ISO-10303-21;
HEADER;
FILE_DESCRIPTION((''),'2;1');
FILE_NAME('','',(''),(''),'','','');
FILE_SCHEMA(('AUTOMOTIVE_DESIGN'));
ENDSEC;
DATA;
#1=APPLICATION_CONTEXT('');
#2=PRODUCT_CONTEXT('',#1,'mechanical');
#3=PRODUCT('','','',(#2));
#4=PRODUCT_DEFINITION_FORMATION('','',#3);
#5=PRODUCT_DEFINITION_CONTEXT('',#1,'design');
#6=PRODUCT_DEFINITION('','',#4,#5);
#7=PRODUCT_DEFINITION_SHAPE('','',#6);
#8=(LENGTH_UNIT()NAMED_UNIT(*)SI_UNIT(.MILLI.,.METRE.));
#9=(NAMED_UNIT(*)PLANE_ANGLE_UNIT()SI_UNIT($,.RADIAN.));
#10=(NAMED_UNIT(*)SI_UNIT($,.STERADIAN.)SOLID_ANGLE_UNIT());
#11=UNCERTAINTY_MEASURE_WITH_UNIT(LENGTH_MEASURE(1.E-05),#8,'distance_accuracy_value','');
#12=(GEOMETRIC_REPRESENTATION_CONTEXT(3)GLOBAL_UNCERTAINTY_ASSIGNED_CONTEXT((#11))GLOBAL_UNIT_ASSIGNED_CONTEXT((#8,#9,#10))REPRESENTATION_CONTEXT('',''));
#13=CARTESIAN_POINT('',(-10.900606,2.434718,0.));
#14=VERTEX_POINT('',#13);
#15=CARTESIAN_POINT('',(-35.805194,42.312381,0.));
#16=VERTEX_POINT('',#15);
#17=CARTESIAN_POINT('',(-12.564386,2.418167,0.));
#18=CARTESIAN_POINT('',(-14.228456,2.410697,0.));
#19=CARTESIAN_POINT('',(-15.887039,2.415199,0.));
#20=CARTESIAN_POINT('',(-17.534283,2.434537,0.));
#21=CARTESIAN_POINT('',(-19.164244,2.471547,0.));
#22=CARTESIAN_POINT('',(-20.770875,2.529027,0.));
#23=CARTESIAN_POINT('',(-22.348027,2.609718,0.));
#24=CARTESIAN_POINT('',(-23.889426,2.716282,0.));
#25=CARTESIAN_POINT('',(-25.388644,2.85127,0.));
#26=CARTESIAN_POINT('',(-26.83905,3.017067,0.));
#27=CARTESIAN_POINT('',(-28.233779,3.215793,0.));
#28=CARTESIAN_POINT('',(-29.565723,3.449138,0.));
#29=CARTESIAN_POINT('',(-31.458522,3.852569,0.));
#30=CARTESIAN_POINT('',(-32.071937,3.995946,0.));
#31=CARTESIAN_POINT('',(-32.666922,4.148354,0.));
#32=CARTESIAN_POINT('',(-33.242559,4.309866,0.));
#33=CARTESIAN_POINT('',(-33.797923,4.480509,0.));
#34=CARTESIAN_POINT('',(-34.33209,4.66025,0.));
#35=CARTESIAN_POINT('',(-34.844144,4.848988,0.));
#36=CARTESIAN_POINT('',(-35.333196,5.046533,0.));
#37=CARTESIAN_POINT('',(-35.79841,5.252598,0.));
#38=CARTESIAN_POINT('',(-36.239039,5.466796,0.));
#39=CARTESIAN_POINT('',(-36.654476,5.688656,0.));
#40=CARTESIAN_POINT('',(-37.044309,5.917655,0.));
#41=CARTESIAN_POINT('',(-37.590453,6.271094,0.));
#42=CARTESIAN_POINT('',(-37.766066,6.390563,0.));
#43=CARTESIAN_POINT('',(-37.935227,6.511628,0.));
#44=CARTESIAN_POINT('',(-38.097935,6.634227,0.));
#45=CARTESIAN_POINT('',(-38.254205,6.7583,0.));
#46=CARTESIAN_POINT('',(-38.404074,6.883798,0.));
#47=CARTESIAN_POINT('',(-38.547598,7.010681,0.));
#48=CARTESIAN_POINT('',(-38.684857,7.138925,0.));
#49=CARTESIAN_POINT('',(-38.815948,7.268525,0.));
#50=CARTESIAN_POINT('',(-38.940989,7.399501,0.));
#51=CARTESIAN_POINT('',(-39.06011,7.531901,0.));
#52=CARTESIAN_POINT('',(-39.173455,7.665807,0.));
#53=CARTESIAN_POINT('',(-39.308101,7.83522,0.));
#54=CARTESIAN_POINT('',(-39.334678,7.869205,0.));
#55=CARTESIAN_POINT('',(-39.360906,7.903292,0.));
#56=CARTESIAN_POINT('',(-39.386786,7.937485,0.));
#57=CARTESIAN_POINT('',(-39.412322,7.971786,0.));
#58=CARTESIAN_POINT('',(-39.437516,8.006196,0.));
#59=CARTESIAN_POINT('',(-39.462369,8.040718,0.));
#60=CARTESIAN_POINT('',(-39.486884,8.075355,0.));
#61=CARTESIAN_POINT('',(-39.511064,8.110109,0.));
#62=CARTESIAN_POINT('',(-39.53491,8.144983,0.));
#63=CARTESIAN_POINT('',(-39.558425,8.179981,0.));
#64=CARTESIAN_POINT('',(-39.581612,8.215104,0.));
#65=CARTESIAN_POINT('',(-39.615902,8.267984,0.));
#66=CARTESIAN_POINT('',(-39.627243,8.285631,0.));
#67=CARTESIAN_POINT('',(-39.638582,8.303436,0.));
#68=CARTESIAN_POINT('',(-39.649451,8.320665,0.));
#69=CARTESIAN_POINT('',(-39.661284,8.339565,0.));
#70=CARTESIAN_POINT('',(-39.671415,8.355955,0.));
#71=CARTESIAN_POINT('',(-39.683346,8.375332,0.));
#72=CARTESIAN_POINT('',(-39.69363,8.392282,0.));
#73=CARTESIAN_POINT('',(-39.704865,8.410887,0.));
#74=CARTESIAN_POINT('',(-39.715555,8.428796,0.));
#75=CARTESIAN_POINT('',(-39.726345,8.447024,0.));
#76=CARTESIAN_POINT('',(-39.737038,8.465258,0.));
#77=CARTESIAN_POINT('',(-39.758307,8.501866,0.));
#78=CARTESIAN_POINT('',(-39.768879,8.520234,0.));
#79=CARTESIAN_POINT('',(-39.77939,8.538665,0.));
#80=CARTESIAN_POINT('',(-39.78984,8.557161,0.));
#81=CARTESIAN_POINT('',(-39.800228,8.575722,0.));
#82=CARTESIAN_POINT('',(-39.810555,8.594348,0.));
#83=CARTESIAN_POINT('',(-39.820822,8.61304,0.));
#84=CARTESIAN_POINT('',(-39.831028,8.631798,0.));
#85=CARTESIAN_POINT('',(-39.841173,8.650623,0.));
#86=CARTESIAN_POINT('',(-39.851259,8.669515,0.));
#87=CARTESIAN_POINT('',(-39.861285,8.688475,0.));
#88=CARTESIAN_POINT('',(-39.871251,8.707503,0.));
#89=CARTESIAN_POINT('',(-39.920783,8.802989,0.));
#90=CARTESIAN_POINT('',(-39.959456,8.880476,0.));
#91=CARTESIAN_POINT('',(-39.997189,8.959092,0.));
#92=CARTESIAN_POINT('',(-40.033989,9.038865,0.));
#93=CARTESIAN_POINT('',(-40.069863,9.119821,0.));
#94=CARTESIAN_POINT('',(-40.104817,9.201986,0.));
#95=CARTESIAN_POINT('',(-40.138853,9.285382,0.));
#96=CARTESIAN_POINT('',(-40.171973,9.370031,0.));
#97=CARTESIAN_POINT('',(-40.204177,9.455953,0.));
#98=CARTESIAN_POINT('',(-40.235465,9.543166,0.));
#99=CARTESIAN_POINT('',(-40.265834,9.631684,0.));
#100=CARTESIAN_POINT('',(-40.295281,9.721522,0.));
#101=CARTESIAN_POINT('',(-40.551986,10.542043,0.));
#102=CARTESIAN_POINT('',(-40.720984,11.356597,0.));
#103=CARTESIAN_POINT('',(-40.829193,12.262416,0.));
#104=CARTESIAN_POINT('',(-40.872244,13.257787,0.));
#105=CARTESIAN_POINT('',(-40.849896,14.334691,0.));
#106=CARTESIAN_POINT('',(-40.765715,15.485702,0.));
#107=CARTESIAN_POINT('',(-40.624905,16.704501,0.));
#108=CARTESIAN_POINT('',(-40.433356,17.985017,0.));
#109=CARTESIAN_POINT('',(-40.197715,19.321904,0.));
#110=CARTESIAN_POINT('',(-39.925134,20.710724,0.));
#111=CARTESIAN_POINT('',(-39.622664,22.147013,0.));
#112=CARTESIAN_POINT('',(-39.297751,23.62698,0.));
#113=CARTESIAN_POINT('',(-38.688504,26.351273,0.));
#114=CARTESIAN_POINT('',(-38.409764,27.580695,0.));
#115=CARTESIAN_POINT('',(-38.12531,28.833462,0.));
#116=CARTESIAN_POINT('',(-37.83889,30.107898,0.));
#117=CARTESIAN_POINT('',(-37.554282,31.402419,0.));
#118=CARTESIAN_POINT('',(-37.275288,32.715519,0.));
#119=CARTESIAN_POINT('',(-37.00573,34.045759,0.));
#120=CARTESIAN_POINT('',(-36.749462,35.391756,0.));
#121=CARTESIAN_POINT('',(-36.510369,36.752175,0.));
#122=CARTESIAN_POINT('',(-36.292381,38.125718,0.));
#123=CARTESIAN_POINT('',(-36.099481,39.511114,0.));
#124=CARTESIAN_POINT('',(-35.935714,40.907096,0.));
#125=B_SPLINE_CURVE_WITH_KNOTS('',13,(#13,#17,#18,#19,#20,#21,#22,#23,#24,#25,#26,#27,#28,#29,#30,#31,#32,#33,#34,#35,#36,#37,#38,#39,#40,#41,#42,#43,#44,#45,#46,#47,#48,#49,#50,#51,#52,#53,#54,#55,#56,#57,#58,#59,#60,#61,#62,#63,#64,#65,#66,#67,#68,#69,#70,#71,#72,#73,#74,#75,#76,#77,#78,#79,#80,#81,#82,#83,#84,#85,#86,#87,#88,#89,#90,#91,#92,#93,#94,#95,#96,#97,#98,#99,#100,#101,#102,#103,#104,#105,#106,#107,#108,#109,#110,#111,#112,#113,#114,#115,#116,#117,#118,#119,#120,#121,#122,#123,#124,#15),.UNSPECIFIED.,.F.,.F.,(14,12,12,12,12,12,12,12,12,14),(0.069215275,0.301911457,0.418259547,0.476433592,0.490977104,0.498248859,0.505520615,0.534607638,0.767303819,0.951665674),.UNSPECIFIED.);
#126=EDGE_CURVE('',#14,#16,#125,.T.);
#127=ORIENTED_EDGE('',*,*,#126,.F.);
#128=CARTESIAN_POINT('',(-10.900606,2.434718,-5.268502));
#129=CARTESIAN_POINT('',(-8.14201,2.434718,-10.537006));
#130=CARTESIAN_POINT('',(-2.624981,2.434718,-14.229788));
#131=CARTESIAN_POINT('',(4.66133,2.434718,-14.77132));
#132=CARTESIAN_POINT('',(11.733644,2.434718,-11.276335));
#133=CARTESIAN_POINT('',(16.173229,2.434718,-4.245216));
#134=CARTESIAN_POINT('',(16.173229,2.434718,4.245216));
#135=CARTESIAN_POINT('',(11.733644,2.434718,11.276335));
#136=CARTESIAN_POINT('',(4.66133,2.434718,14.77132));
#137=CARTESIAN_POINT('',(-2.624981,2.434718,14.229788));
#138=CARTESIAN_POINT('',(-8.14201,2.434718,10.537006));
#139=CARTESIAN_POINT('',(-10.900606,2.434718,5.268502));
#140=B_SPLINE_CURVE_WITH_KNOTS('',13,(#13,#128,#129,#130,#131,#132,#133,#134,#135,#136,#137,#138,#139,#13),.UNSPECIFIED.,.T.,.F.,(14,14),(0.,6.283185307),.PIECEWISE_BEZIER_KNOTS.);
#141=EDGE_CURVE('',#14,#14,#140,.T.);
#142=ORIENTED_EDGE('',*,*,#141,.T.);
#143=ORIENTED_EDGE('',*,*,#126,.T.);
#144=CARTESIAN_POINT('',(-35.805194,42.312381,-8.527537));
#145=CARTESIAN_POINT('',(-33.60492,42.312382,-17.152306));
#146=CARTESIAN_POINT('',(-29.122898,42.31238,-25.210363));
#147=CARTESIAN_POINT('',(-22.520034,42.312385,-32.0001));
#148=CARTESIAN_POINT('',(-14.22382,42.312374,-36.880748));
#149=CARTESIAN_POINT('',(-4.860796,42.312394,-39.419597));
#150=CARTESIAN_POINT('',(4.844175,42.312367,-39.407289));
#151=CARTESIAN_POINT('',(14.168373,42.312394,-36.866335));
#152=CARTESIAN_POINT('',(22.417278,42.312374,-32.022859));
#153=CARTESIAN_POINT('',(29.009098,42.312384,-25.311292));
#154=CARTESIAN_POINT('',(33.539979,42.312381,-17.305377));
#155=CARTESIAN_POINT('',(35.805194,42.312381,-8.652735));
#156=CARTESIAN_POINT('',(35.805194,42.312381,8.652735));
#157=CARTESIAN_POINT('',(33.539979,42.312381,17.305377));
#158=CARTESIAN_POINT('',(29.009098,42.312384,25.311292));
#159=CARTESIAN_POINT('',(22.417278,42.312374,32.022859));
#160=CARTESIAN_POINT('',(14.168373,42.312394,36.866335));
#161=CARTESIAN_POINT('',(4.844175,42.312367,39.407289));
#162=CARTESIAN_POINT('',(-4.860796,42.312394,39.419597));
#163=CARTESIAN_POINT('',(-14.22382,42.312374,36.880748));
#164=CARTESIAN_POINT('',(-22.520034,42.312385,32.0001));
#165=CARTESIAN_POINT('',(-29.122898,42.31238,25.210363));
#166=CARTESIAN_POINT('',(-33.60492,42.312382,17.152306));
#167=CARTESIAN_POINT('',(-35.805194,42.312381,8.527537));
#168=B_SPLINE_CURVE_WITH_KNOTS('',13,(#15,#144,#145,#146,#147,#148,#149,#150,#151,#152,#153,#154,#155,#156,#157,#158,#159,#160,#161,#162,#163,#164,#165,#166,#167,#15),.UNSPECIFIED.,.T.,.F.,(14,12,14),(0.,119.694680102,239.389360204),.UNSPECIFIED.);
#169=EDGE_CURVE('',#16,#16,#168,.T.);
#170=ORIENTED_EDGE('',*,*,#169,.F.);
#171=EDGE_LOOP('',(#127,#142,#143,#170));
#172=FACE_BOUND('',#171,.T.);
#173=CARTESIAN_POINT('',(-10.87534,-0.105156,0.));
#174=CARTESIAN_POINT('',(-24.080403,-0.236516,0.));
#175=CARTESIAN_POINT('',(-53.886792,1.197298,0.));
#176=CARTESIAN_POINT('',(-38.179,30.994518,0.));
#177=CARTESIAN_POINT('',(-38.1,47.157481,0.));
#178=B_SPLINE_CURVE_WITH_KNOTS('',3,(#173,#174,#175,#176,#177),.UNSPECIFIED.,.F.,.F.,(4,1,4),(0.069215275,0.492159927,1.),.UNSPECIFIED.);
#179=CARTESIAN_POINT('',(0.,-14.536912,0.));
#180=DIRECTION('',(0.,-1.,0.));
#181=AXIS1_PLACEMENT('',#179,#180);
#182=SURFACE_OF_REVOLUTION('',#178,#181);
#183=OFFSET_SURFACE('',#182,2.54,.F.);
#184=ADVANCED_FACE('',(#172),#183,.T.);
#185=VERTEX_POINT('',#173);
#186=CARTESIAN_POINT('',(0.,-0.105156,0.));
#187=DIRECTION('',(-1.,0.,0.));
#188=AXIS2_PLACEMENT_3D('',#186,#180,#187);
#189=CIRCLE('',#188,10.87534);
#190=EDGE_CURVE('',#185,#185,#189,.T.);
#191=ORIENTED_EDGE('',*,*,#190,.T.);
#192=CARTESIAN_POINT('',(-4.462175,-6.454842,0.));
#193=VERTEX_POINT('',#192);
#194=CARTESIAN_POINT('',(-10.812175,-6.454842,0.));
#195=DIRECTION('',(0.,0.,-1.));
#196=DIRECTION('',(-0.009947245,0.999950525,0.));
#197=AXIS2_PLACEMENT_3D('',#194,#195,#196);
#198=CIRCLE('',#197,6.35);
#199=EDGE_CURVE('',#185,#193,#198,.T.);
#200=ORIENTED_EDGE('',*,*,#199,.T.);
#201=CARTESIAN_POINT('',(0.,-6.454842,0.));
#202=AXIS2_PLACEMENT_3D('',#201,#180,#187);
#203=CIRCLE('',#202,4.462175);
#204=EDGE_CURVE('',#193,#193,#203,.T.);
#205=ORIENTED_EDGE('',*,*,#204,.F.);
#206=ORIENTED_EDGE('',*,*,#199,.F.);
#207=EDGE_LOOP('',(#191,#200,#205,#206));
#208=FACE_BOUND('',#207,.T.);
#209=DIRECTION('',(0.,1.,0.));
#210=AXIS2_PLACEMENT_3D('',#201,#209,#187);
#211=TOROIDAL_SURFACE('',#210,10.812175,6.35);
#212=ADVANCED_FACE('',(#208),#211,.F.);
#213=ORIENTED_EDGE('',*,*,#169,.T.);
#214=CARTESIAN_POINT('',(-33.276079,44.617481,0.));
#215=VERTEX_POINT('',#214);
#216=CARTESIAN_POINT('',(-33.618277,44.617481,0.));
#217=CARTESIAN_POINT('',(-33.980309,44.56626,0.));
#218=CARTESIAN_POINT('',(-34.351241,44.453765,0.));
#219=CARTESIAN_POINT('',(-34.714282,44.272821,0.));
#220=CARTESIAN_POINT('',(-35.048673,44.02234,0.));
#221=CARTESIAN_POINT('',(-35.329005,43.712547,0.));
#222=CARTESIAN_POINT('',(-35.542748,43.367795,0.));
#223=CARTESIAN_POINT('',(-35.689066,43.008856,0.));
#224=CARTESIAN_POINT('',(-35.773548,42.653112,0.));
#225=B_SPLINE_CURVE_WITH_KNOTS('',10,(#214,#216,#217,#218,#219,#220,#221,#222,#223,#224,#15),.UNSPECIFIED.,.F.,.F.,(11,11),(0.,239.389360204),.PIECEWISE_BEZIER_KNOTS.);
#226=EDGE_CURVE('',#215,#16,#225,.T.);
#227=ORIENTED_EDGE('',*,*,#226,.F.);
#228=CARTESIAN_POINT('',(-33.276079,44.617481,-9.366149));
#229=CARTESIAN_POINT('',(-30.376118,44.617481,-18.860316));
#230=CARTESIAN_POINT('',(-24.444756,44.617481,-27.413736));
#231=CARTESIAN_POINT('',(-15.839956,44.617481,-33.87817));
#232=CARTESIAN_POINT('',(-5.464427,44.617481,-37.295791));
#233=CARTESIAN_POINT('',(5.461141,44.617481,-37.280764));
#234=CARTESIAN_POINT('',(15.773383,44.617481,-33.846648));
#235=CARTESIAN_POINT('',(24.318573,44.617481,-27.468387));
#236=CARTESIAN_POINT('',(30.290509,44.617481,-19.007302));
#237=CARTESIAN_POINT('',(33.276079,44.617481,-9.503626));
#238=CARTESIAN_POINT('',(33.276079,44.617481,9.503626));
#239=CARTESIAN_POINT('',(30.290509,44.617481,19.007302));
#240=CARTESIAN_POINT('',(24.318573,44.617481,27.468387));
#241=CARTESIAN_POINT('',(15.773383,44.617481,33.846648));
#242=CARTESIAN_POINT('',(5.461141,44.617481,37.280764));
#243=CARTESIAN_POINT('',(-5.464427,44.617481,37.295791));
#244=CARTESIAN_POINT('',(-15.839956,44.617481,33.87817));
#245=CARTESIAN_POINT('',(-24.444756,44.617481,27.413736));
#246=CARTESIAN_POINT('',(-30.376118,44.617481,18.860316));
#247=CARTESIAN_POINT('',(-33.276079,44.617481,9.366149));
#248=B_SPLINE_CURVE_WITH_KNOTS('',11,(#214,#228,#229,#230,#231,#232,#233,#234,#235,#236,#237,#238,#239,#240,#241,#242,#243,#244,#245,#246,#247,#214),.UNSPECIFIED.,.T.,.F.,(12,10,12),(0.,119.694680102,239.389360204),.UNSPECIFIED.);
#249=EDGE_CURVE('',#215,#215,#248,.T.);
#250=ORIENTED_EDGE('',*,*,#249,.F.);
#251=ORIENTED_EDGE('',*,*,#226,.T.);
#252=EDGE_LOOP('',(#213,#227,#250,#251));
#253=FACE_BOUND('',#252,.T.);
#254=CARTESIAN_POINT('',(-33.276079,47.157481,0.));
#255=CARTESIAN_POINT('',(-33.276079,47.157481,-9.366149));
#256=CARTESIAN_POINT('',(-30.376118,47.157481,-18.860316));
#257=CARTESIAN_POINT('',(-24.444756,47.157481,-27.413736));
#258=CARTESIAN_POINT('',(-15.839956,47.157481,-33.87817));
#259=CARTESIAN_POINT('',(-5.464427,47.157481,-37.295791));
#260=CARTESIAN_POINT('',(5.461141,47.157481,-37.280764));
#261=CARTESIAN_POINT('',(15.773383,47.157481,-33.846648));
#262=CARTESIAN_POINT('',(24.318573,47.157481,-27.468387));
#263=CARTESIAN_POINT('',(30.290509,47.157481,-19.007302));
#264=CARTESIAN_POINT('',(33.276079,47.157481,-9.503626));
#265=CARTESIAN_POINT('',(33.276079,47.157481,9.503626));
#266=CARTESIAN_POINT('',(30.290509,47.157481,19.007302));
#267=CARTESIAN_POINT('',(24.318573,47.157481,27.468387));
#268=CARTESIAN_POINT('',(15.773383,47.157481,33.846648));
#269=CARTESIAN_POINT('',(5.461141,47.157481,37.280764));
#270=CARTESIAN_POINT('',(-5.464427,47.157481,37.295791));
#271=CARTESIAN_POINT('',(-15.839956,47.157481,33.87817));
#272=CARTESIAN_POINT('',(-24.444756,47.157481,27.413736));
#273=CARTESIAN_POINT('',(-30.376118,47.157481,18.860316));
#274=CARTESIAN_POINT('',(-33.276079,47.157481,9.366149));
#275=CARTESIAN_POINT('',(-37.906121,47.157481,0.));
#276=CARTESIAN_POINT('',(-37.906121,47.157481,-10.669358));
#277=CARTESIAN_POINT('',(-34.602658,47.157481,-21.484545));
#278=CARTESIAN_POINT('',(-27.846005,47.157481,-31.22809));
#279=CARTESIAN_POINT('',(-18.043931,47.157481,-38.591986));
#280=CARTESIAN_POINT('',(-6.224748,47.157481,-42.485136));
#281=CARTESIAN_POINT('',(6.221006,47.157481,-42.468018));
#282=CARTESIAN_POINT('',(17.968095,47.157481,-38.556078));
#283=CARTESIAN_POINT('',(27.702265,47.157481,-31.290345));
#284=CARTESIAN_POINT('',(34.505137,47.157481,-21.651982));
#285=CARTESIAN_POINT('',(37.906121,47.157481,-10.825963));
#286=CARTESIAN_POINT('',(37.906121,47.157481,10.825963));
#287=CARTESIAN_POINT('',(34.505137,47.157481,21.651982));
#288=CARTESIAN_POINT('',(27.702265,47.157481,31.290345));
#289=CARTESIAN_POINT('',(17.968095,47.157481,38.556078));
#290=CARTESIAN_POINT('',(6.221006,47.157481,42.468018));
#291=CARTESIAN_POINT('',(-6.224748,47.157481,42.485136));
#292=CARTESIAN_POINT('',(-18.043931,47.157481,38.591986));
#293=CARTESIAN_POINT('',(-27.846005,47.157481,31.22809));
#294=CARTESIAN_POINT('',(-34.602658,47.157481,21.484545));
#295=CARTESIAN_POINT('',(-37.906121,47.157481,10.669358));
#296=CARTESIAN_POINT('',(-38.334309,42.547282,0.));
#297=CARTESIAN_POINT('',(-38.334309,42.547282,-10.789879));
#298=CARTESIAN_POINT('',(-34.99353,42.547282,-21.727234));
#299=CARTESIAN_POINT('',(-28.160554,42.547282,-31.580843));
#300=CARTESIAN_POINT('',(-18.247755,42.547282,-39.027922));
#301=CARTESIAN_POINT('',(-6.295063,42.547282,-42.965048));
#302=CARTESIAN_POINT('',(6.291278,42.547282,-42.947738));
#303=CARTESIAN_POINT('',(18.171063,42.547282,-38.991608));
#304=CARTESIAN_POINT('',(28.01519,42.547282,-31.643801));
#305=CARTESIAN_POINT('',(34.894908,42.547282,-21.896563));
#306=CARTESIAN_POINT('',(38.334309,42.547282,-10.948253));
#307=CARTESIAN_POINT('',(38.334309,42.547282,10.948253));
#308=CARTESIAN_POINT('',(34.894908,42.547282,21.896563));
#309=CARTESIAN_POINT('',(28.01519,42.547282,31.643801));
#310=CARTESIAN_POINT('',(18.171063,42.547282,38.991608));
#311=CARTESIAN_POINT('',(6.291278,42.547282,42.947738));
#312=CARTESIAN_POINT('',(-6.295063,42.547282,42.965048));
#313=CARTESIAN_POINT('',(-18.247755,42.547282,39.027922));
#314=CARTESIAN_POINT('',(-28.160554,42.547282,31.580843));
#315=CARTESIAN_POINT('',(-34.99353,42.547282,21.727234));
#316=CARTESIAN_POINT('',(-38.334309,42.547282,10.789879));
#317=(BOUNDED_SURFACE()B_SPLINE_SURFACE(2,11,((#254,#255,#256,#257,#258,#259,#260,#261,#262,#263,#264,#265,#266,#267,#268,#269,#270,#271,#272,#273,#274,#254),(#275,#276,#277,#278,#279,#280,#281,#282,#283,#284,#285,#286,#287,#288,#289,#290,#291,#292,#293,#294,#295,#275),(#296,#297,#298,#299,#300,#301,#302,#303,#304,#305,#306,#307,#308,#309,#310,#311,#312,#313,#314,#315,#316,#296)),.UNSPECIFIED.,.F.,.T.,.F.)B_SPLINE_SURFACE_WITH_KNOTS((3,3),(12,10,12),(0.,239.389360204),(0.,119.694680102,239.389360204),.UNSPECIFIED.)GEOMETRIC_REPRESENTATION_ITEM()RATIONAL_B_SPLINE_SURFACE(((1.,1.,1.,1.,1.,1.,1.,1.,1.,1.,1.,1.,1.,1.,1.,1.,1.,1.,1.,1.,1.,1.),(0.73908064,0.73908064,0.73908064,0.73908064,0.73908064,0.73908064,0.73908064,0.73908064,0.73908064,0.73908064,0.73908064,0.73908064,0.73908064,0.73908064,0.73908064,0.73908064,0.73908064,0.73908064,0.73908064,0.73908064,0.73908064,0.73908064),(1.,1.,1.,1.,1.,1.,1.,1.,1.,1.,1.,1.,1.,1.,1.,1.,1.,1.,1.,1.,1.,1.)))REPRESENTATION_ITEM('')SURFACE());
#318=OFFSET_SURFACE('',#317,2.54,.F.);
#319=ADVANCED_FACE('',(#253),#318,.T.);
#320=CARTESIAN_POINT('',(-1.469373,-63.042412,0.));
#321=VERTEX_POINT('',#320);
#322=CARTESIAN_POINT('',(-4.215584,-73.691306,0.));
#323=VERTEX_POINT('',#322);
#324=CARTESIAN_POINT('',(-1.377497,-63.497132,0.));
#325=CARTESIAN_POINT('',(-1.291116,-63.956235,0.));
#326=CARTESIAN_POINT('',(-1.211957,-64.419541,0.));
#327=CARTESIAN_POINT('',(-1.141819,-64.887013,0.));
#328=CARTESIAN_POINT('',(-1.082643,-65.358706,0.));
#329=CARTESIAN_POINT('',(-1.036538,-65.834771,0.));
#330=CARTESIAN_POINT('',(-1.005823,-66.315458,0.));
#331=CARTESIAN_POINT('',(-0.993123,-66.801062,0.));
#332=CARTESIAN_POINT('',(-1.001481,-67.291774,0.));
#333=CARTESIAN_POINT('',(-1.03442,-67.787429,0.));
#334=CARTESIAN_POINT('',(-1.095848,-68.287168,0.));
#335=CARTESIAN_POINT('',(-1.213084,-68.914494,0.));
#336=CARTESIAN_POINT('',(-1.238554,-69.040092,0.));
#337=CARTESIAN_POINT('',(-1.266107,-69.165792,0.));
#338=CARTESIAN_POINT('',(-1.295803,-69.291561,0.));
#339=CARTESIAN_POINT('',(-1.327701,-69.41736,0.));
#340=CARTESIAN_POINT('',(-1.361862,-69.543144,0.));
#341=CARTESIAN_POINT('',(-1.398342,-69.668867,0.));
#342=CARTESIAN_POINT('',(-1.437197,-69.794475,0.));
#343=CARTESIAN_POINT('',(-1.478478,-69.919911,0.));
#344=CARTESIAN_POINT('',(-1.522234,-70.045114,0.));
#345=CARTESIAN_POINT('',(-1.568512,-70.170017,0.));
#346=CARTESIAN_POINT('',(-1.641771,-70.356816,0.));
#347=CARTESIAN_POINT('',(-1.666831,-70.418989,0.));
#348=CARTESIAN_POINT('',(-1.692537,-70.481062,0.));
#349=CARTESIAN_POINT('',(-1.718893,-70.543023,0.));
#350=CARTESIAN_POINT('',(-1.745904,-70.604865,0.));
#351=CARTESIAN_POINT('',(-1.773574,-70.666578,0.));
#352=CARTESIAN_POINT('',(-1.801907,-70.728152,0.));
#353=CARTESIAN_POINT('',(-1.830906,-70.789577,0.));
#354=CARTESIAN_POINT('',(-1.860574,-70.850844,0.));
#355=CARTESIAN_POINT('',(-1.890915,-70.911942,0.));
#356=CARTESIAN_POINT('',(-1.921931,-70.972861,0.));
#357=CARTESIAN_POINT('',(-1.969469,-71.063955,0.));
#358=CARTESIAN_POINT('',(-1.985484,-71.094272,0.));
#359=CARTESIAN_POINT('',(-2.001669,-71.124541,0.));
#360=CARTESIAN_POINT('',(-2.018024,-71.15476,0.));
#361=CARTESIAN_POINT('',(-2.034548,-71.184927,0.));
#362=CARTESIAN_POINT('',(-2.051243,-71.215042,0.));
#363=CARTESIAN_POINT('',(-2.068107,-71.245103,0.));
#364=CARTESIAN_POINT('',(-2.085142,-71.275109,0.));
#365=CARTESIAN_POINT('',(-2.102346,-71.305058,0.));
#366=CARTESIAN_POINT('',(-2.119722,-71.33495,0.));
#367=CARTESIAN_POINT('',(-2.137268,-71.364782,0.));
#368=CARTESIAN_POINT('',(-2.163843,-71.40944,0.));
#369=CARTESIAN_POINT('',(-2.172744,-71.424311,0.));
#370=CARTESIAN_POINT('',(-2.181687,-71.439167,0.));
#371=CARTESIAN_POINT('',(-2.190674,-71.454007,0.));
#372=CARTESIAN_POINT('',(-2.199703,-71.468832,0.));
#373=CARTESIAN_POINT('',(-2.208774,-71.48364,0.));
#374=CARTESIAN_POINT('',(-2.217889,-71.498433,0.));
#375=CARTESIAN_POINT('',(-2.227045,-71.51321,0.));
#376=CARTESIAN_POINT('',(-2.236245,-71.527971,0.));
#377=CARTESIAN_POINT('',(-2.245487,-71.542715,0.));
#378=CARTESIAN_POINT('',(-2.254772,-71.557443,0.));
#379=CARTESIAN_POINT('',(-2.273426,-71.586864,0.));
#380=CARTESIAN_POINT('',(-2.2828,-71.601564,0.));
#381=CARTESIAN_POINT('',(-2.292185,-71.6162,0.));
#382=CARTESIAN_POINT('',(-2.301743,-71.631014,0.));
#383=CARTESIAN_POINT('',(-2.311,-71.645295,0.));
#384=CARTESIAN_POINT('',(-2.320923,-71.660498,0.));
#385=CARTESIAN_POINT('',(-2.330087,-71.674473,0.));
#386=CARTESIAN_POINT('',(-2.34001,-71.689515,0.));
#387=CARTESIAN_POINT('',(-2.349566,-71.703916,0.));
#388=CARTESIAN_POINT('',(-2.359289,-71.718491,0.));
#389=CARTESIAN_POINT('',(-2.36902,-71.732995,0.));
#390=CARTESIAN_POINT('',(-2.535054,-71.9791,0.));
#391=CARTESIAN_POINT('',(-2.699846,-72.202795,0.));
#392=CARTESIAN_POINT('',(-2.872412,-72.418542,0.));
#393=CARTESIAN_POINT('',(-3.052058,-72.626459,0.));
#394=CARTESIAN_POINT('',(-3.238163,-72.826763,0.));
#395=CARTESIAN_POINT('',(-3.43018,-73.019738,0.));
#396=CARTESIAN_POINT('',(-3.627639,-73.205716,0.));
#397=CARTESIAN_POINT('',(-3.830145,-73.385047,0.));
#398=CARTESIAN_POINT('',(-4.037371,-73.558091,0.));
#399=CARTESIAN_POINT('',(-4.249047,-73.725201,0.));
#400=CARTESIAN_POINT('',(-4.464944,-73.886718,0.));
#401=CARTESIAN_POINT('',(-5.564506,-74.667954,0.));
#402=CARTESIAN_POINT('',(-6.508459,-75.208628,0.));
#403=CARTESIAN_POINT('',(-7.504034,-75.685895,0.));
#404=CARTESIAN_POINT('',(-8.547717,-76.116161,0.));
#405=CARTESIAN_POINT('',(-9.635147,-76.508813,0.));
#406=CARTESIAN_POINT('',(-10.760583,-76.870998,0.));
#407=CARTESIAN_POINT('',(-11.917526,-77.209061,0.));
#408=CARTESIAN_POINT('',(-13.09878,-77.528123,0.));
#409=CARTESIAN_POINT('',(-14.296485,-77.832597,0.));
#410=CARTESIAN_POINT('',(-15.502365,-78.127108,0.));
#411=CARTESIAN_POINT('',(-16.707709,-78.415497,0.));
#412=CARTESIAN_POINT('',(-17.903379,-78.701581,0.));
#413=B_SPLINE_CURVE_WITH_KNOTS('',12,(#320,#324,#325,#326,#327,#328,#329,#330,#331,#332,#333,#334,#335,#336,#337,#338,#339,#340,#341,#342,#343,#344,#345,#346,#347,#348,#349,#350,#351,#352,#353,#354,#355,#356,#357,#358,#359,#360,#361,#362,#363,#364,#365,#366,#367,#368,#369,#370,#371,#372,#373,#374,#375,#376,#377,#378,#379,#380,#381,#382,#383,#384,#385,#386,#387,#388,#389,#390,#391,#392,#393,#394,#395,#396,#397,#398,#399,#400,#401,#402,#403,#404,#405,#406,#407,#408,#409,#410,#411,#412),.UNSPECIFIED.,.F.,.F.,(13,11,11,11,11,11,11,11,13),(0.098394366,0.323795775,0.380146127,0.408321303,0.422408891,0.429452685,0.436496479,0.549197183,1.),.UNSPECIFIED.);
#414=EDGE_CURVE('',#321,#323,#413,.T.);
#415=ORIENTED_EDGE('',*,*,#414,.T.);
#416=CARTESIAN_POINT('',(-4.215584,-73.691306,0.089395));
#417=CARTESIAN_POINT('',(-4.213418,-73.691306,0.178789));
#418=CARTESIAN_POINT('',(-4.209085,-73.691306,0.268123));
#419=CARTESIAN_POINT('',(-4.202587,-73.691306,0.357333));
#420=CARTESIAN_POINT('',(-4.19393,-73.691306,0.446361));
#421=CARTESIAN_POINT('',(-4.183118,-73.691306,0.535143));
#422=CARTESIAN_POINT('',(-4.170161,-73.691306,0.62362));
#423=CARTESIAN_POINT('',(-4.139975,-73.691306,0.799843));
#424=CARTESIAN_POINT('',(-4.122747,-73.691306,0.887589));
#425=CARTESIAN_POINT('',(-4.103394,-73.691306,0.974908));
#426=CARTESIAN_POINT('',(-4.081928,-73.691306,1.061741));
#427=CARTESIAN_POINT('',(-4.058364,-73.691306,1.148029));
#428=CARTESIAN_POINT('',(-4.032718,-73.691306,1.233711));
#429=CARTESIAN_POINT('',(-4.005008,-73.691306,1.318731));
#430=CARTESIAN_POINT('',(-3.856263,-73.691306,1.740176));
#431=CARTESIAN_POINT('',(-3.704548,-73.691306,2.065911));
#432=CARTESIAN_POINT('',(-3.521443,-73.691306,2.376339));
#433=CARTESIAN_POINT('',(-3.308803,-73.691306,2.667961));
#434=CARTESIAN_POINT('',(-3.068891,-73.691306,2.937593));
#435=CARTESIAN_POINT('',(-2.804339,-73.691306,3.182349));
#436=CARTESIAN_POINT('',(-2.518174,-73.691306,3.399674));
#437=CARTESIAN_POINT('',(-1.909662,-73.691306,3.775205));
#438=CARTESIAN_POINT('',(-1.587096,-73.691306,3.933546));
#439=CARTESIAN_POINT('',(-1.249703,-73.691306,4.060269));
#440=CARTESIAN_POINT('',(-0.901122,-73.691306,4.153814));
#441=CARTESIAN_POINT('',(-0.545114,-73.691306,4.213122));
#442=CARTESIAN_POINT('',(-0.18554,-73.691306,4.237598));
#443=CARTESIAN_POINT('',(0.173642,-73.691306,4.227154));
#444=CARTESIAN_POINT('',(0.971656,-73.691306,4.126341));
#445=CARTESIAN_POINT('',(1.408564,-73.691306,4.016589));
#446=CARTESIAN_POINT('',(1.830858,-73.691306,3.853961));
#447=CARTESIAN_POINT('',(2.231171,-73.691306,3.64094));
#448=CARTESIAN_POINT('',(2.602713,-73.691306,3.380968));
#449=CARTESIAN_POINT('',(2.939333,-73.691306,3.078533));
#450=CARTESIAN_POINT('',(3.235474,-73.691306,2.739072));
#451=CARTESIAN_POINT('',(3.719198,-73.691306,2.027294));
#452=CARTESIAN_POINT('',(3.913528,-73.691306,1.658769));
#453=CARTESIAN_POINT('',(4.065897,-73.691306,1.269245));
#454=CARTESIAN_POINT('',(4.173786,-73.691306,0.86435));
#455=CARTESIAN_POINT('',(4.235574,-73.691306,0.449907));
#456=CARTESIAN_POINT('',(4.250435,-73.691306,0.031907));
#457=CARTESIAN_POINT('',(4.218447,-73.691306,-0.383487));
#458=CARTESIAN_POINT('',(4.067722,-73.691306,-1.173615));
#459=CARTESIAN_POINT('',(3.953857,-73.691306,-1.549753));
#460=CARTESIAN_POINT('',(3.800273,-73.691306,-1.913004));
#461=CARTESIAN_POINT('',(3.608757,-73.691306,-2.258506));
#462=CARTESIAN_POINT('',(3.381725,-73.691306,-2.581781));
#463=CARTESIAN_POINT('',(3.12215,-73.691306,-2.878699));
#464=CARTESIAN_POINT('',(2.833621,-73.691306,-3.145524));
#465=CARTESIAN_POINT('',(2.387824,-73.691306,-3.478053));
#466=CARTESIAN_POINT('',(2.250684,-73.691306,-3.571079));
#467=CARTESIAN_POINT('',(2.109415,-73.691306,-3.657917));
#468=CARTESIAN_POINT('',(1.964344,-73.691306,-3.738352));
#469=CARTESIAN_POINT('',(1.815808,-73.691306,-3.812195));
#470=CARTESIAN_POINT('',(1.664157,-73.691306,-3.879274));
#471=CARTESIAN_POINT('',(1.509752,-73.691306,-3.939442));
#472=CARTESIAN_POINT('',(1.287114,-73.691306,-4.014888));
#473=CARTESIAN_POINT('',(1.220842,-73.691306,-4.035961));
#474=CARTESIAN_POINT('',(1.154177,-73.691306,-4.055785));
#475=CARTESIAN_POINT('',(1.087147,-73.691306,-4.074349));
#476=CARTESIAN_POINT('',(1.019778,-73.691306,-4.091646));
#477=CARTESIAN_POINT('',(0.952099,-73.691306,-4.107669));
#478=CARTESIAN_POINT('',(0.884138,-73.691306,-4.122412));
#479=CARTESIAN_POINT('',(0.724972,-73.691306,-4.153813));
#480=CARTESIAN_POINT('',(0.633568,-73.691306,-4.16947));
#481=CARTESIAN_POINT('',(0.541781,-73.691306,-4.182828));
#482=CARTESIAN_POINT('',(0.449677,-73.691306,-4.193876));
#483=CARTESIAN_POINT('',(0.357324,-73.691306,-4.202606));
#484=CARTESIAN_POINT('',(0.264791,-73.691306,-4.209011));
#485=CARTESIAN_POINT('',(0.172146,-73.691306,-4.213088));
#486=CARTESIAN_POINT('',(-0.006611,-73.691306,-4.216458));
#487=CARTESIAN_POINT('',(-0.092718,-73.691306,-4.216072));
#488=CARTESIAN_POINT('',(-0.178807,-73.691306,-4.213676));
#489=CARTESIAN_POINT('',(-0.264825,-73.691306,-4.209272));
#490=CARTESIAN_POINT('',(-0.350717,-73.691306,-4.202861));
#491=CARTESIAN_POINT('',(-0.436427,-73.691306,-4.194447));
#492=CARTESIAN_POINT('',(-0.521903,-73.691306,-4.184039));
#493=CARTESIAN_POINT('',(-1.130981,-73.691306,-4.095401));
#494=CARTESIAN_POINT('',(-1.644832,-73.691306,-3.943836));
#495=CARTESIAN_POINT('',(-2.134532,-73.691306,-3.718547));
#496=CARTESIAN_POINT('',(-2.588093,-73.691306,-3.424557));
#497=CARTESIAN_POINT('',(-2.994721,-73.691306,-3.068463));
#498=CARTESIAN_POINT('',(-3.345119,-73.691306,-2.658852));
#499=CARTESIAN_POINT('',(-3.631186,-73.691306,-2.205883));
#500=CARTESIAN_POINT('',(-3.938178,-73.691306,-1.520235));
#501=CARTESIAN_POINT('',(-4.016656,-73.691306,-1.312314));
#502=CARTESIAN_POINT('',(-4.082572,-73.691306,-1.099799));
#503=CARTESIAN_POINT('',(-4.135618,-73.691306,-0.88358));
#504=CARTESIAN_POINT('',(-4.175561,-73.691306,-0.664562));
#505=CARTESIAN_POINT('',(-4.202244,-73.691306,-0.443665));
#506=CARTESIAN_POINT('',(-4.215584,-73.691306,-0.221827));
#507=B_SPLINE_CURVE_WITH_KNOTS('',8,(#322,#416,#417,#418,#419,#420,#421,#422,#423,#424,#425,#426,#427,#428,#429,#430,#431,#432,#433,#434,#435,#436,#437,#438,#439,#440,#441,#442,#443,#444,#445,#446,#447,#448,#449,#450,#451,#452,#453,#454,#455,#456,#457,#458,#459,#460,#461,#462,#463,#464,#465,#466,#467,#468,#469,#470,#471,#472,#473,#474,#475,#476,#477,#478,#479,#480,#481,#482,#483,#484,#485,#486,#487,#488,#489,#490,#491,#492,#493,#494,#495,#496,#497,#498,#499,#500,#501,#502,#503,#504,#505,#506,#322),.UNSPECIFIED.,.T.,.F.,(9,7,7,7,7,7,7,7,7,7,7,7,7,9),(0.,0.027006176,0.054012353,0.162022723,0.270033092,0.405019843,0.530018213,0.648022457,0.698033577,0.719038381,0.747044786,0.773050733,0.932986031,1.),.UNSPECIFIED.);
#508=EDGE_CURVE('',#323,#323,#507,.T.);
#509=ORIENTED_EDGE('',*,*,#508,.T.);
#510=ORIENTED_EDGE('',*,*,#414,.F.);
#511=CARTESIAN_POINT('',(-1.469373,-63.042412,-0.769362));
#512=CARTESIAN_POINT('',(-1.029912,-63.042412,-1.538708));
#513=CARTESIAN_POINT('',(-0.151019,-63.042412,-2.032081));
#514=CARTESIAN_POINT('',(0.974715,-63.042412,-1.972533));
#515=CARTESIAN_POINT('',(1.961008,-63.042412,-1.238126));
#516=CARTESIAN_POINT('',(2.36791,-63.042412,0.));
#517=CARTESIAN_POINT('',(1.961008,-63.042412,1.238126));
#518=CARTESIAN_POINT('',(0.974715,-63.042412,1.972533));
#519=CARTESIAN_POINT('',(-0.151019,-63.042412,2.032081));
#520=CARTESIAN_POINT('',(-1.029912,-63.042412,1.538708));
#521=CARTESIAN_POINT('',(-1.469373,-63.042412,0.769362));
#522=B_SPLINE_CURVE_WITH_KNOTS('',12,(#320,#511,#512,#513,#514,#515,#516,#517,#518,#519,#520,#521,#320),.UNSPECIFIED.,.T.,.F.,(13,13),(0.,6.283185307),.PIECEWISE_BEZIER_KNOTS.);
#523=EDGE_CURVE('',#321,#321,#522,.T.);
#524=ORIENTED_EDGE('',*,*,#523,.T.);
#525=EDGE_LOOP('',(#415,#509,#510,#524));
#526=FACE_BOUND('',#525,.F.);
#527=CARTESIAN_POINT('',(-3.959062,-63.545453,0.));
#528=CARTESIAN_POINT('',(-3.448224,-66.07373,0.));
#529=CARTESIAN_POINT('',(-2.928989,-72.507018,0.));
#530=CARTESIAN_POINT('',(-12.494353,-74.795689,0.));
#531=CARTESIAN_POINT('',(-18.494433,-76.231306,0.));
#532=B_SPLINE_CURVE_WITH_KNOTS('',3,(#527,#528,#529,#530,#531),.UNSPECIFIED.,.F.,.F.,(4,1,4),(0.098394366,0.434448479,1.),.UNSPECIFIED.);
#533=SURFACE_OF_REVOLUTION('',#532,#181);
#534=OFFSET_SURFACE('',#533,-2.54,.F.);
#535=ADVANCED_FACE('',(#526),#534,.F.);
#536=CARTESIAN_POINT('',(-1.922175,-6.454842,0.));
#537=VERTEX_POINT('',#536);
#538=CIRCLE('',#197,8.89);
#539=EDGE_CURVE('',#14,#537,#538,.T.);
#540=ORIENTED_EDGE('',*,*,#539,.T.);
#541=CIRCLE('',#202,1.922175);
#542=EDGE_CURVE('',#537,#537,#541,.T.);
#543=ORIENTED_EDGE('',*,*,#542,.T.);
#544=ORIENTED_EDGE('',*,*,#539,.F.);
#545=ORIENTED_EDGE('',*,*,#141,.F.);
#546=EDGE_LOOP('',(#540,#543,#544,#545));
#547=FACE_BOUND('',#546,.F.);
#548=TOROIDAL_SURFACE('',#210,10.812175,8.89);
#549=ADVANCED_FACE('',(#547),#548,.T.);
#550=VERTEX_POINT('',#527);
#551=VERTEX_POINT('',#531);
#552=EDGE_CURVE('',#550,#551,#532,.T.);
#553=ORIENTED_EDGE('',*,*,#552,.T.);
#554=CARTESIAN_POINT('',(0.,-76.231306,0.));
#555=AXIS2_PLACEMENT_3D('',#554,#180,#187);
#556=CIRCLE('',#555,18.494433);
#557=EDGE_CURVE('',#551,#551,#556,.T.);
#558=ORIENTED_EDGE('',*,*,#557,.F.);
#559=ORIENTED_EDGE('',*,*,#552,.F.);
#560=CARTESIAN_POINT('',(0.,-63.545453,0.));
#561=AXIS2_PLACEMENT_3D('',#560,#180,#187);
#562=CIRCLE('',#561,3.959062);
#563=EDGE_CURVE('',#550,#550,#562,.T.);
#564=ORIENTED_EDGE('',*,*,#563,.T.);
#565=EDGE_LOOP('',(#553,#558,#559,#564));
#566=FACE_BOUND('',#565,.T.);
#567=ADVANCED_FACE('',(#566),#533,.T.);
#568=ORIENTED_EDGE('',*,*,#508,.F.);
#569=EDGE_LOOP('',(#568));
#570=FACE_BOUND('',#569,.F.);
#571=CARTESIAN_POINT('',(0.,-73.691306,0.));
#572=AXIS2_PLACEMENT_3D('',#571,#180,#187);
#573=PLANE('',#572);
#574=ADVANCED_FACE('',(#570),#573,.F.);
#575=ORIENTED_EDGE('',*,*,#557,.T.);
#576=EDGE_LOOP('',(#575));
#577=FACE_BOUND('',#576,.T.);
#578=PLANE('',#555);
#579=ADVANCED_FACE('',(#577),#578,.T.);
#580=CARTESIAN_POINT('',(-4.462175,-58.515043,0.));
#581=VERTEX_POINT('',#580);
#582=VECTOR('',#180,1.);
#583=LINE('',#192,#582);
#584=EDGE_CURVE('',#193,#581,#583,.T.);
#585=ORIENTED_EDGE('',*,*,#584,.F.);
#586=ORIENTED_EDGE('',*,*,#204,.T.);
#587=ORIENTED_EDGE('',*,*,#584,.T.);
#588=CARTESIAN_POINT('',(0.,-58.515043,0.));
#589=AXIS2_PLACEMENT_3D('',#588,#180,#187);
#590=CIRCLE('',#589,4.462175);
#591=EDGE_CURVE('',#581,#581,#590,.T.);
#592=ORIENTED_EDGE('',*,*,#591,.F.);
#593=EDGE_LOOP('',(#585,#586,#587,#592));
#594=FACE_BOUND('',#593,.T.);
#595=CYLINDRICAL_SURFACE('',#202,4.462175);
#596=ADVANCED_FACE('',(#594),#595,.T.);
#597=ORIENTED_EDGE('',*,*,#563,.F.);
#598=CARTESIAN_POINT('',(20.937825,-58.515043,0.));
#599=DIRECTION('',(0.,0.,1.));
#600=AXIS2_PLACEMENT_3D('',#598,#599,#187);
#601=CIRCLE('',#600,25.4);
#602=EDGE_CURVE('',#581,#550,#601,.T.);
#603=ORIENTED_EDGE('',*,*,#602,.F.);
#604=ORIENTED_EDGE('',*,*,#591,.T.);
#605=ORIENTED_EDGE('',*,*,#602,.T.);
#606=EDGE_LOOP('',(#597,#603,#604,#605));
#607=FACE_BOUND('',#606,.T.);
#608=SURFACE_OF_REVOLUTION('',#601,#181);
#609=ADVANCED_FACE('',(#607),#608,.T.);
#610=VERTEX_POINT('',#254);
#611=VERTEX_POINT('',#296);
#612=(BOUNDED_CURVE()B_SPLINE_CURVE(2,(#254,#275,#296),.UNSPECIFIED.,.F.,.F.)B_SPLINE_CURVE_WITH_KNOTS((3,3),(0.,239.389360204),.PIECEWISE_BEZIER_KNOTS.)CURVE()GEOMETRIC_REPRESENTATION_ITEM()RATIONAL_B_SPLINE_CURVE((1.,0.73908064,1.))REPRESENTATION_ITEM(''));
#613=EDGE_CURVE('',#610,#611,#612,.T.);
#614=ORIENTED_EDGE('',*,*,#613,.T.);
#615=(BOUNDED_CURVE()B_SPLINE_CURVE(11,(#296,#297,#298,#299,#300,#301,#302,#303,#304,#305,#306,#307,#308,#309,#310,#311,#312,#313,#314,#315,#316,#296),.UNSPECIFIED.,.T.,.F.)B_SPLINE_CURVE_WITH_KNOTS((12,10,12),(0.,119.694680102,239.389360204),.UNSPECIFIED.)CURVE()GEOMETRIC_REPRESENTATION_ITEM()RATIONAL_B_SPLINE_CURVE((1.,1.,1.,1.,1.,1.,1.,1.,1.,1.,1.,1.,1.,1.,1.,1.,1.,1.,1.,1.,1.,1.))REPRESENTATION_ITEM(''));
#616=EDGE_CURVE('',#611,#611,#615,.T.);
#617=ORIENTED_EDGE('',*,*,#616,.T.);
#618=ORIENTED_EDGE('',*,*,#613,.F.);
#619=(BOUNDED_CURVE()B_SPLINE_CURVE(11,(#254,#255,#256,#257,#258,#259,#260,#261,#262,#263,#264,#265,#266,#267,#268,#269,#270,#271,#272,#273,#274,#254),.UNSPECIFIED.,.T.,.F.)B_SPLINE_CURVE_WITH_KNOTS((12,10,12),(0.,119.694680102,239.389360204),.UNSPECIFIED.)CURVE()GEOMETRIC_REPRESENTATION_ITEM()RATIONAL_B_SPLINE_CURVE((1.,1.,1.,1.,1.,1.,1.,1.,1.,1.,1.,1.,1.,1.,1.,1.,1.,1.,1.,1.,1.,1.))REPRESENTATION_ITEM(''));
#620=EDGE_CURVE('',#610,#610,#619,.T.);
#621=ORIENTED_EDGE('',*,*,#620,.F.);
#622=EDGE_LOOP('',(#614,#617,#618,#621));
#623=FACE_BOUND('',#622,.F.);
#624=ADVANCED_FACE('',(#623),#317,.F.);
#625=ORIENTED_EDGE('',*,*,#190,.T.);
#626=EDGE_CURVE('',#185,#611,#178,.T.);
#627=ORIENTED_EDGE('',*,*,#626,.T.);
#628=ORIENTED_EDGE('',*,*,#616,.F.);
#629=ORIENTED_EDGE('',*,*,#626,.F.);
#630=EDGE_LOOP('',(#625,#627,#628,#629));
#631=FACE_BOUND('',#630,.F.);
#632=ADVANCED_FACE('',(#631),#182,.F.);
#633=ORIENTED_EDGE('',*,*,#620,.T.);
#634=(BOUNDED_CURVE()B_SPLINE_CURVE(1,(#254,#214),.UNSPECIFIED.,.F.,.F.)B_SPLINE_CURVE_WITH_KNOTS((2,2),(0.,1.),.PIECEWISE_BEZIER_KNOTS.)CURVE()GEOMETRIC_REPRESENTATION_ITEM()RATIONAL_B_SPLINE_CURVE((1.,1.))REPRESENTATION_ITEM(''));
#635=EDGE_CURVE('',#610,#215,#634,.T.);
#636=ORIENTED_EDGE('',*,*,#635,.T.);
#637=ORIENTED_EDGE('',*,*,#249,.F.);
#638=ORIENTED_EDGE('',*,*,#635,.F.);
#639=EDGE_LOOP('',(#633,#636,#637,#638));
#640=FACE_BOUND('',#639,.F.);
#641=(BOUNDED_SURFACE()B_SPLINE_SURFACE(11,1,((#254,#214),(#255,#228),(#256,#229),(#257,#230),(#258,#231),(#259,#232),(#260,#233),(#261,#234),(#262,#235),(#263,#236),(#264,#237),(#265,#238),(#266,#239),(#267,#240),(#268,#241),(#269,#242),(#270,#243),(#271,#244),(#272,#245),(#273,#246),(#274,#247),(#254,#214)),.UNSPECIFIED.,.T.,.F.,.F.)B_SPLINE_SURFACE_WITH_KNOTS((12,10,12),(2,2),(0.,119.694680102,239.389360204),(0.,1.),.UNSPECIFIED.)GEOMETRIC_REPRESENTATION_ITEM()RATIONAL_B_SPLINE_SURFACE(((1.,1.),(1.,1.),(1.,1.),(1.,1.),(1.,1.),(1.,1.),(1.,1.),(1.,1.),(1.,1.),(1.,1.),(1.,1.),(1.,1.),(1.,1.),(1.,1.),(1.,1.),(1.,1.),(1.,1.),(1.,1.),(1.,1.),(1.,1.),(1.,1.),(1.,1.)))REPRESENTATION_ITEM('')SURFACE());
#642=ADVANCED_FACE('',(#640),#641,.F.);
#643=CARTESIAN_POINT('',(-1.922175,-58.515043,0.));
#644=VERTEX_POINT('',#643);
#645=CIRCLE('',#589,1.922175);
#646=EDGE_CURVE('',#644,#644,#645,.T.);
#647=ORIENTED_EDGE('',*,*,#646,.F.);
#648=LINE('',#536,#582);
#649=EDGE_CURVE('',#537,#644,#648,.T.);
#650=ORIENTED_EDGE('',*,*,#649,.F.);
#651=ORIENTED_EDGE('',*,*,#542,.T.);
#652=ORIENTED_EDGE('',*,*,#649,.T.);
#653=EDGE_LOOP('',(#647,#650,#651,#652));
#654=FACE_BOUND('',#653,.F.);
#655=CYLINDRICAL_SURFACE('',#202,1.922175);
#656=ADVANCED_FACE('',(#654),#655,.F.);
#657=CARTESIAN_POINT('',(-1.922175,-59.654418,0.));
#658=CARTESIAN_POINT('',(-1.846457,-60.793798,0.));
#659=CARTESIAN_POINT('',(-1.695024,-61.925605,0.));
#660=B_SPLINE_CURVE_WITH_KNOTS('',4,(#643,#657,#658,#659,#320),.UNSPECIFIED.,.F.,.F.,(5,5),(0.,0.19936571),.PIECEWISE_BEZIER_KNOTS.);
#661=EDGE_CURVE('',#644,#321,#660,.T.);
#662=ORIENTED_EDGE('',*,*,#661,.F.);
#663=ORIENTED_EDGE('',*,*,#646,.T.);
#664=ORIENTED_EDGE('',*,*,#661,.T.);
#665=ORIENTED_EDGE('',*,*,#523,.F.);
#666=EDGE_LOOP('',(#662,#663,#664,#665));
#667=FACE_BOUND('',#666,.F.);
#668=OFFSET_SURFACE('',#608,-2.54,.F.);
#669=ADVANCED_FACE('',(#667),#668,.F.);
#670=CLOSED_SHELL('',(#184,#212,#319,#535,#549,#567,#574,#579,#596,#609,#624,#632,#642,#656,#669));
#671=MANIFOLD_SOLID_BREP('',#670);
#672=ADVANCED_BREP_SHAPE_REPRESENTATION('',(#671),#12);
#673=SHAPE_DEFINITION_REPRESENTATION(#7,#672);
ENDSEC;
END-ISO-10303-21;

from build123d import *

# Parameters (mm, degrees)
F2_R = 5.08
F3_T = 2.54


# Not quite as in the source:
# - a shell that OpenCascade refuses in one call is made with other operations: the cavity is built on its own and cut out


with BuildPart() as f1:
    # F0 (on Top) → F1 (revolve)
    with BuildSketch(Plane.XY):
        with BuildLine():
            Line((-4.4621749899, -6.4548418265), (-4.4621749899, -58.5150425204))
            ThreePointArc((-4.4621749899, -58.5150425204), (-4.3360837237, -61.0427959336), (-3.9590618153, -63.5454526832))
            add(Edge.make_bspline(
                [(-3.9590618153, -63.5454526832), (-3.4482239959, -66.073729894), (-2.9289890524, -72.5070184577), (-12.4943527332, -74.7956886465), (-18.4944327921, -76.2313062371)],
                knots=[0.0983943665, 0.0983943665, 0.0983943665, 0.0983943665, 0.4344484786, 1, 1, 1, 1], degree=3))
            Line((-18.4944327921, -76.2313062371), (0, -76.2313062371))
            Line((0, -76.2313062371), (0, 47.1574812874))
            Line((0, 47.1574812874), (-38.1, 47.1574812874))
            add(Edge.make_bspline(
                [(-10.8753399986, -0.1051559932), (-24.0804030891, -0.2365164961), (-53.8867917052, 1.1972984925), (-38.1790002619, 30.9945182712), (-38.1, 47.1574812874)],
                knots=[0.0692152754, 0.0692152754, 0.0692152754, 0.0692152754, 0.4921599265, 1, 1, 1, 1], degree=3))
            ThreePointArc((-10.8753399986, -0.1051559932), (-6.3444349463, -1.9424368245), (-4.4621749899, -6.4548418265))
        make_face()
    revolve(axis=Axis((0, -14.5369124748, 0), (0, -1, 0)))

    # F2
    f2_edges = [f1.edges().sort_by_distance(p)[0] for p in [
        (38.1, 47.157481, 0),
        (10.87534, -0.105156, 0),
        (-43.141323, 10.778526, 0),
    ]]
    fillet(f2_edges, radius=F2_R)

    # F3: shell of thickness 2.54, made by hand


with BuildPart() as f3_core1:
    # F3_t2: copy of F1
    add(f1.part)

    # the walls: a layer under each face that stays
    f3_faces = [f3_core1.faces().sort_by_distance(p)[0] for p in [
        (36.6980535185, 45.8320109386, 0),
        (42.2566325914, 7.7991455605, 0),
        (6.3444349463, -1.9424368245, 0),
        (4.4621749899, -32.4849421735, 0),
        (4.3360837237, -61.0427959336, 0),
        (6.1560032358, -71.9723790145, 0),
        (0, -76.2313062371, 0),
    ]]
    thicken(f3_faces, amount=-F3_T, mode=Mode.SUBTRACT)


with BuildPart() as f1_1:
    add(f1.part)

    # what is left inside the walls is the cavity
    f3_cavity = [f3_core1.part.solids().sort_by_distance(p)[0] for p in [
        (34.731064, 4.861232, 0),
    ]]
    add(f3_cavity, mode=Mode.SUBTRACT)


solid = f1_1.part
